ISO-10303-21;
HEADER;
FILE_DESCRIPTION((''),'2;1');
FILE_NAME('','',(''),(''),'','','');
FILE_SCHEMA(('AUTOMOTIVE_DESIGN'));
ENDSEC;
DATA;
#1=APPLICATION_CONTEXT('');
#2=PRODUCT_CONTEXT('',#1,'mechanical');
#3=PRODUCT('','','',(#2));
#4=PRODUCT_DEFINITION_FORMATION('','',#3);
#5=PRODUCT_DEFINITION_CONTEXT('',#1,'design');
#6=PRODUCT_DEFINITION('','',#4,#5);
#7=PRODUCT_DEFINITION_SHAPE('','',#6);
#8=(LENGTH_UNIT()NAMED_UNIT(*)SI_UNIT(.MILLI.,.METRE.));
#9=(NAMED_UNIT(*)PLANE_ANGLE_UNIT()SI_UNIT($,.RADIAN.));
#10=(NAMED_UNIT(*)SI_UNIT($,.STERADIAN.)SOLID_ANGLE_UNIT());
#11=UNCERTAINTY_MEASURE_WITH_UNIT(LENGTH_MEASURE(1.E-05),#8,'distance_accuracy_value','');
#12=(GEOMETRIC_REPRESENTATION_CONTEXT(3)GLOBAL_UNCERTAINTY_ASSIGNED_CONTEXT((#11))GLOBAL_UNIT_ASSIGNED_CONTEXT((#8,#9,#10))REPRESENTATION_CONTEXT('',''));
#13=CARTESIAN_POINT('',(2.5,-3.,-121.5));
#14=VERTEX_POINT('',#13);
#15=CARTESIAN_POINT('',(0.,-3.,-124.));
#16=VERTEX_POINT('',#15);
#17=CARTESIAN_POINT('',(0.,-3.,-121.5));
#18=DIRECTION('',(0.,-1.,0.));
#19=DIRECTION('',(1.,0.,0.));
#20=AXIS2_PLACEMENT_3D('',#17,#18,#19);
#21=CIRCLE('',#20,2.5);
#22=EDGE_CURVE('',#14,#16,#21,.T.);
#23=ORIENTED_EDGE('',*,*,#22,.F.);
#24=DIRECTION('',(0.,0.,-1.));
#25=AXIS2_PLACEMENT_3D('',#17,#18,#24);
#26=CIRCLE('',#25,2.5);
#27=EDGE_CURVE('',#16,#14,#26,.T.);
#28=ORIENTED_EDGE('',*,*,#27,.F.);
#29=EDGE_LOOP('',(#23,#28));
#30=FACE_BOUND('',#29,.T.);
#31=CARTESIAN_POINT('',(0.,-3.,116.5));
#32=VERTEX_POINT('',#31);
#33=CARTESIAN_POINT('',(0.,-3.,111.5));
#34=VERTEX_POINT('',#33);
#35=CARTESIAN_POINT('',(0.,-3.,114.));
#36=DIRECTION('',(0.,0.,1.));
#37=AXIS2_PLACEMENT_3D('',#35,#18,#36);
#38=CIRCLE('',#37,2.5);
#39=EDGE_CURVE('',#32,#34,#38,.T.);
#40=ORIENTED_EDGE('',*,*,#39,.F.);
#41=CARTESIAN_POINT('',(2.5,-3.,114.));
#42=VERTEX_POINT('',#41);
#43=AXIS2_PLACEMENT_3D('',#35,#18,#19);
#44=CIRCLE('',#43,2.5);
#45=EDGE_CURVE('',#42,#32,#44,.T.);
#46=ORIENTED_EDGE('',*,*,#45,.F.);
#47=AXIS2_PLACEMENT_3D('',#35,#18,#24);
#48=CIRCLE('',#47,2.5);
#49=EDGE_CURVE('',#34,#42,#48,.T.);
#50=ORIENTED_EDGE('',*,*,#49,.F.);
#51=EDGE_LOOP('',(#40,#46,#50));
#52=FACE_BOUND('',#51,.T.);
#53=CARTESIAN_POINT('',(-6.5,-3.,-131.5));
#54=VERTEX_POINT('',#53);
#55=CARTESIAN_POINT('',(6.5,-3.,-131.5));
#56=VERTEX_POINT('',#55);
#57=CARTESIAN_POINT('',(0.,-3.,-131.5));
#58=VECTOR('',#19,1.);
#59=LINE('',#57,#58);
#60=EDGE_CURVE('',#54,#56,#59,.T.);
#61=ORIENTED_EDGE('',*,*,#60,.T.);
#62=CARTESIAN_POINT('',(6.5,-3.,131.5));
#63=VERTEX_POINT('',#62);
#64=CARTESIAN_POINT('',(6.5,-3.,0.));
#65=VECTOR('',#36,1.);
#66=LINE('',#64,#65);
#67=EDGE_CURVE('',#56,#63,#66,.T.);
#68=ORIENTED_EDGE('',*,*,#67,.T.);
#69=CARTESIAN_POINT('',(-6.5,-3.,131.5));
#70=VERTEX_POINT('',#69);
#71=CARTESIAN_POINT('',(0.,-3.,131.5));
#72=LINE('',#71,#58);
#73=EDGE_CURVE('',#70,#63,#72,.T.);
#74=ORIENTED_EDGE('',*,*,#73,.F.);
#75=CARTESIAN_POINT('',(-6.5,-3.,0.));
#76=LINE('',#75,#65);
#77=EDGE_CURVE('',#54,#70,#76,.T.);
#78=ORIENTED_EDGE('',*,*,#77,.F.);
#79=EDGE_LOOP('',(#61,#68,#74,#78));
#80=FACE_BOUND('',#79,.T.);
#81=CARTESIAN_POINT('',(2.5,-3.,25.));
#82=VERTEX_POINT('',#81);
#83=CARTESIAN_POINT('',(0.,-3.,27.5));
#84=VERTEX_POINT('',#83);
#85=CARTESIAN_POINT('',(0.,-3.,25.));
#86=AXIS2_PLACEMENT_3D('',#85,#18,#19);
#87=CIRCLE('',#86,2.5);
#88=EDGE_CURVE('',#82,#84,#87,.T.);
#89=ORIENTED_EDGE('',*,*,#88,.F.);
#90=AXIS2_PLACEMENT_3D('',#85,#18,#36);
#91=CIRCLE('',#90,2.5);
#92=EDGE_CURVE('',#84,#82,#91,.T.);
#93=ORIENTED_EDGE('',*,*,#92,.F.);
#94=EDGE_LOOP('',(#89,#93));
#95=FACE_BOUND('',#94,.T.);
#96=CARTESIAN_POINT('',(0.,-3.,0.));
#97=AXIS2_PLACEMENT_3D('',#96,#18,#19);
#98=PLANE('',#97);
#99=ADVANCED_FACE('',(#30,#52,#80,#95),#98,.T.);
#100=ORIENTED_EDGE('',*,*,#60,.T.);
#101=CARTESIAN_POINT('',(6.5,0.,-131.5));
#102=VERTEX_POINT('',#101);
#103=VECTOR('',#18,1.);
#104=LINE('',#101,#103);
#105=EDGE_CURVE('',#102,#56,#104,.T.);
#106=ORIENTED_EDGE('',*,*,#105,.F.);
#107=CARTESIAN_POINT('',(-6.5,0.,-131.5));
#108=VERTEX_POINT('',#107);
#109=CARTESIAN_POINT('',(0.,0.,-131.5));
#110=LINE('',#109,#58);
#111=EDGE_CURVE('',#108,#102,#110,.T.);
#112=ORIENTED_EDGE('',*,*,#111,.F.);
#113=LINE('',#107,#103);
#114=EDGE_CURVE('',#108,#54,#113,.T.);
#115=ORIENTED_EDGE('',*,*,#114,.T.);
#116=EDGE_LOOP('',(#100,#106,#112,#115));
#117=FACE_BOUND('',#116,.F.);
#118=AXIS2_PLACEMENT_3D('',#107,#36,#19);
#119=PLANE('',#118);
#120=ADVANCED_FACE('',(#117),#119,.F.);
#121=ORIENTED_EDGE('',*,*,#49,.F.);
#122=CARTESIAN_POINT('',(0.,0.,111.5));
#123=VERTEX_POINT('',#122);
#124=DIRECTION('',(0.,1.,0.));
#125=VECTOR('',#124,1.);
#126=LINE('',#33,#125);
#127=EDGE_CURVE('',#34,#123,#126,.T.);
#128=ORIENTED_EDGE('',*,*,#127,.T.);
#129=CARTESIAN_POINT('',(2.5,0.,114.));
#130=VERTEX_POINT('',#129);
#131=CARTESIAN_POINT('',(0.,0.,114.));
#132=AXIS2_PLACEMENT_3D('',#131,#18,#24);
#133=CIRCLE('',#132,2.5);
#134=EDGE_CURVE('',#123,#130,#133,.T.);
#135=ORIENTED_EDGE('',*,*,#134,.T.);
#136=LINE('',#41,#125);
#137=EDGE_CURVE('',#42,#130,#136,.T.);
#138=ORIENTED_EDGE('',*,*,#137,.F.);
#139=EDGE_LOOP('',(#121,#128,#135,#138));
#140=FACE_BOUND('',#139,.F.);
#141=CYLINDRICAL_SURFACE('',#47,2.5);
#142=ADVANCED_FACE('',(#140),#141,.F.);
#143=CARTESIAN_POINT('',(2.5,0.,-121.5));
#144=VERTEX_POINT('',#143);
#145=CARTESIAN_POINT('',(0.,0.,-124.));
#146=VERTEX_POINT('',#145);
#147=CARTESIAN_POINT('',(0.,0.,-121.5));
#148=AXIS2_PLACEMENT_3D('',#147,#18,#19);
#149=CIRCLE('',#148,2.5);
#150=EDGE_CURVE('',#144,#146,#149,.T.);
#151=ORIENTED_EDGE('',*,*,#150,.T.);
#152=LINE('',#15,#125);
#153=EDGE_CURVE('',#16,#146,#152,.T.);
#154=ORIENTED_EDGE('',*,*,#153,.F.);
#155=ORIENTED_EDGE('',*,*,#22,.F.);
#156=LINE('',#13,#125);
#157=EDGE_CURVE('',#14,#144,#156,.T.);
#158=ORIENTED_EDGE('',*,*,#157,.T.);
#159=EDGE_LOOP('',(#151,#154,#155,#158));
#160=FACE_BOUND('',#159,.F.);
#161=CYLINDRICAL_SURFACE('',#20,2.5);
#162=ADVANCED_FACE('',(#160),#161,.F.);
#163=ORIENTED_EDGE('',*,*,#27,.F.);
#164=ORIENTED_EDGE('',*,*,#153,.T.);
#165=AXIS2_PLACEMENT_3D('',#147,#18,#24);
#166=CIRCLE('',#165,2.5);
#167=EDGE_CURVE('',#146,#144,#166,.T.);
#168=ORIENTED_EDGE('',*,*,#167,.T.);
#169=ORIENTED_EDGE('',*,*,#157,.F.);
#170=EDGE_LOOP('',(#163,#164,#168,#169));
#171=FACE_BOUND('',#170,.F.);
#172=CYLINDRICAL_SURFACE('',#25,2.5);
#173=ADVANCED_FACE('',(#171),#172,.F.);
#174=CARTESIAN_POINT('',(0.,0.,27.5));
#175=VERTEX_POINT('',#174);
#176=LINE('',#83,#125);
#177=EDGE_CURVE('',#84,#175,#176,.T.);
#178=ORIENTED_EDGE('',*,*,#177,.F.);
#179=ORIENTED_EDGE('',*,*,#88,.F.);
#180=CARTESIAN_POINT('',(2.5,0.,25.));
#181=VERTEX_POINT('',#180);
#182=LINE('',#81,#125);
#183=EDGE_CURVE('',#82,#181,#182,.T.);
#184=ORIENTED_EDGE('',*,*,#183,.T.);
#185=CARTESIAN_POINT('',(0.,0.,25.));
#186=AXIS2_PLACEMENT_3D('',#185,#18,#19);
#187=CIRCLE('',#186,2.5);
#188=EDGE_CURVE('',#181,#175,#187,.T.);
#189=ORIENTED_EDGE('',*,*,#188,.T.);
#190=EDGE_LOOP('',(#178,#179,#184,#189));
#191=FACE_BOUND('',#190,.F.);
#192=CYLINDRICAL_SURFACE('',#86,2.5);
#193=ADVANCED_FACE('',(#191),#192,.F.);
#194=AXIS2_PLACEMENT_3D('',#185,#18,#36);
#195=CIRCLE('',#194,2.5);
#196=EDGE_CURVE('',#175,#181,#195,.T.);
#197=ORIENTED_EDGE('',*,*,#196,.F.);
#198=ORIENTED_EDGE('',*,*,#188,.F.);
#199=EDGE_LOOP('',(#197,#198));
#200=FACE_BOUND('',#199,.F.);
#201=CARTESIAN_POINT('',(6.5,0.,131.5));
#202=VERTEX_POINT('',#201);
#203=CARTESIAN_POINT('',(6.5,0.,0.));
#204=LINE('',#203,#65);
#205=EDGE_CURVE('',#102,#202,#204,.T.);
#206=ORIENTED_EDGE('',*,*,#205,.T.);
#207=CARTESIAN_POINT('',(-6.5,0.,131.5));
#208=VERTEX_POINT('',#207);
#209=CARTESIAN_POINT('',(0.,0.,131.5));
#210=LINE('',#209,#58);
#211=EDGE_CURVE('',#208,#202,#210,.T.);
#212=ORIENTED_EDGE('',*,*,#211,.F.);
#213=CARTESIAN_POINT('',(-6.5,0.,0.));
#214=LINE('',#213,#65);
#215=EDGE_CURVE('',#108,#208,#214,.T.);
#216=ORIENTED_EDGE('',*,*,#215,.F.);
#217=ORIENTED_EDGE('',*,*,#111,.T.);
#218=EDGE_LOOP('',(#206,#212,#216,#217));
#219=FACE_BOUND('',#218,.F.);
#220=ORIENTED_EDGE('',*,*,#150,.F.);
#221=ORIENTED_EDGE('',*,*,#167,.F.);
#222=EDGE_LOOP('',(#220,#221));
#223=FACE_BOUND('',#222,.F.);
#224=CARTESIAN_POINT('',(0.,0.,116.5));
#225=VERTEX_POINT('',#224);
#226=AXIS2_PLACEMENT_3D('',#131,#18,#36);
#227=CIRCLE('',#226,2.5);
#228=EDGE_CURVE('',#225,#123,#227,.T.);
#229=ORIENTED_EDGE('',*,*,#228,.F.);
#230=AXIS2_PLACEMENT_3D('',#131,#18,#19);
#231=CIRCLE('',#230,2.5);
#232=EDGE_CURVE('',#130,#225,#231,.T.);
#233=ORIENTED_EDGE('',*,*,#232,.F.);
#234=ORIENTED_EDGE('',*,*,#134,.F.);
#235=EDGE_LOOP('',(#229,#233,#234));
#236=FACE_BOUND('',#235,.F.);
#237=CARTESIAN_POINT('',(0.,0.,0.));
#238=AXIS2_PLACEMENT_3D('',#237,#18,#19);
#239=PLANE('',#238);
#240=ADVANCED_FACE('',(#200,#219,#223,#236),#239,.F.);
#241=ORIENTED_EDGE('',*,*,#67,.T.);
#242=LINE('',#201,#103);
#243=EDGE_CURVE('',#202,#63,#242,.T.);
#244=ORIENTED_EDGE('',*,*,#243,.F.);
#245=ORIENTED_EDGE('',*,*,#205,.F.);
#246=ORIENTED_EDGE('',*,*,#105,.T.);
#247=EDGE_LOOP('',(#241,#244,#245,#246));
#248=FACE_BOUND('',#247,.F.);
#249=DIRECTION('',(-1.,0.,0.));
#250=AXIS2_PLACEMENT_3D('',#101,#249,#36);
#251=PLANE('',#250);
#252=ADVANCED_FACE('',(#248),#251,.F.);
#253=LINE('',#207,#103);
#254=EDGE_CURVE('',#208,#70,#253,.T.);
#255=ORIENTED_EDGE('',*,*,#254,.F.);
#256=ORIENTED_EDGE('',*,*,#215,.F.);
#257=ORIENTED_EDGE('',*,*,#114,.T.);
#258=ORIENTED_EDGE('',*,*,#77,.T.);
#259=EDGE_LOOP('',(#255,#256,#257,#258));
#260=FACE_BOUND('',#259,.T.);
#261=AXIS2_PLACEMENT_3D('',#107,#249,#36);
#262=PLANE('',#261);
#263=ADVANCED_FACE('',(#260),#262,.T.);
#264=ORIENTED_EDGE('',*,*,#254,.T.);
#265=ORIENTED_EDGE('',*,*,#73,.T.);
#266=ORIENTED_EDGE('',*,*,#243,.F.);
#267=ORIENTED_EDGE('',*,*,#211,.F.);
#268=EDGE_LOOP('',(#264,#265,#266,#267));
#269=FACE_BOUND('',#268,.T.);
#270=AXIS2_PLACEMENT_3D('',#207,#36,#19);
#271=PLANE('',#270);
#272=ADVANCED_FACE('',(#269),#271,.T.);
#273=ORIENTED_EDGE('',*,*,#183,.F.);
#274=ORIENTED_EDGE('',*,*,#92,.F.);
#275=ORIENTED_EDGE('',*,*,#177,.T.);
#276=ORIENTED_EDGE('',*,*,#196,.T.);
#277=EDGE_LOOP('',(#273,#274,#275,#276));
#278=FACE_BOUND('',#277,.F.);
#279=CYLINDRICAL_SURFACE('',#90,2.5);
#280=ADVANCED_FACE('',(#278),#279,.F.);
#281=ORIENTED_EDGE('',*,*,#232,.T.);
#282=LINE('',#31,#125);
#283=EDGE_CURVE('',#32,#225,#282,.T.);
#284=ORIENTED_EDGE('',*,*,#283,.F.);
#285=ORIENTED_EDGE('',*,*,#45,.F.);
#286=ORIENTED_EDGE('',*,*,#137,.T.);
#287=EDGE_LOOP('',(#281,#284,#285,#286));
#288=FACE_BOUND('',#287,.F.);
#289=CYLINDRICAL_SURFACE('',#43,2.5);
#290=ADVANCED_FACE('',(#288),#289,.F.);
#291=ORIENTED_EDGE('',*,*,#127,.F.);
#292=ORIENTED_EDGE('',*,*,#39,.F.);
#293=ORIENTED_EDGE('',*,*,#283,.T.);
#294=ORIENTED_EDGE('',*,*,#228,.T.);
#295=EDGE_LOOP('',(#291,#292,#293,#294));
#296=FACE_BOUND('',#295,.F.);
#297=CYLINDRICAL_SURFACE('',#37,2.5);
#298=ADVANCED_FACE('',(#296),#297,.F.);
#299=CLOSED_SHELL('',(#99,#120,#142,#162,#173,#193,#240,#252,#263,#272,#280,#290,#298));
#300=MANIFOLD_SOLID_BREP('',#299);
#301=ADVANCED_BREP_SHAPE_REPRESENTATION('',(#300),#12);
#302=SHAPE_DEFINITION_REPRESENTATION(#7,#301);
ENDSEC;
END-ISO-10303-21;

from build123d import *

# Parameters (mm, degrees)
F0_W     = 13
F0_H     = 263
F1_DEPTH = 3
F3_DEPTH = 25


with BuildPart() as f1:
    # F0 (on Front) → F1 (new body)
    with BuildSketch(Plane.XZ):
        Rectangle(F0_W, F0_H)
    extrude(amount=F1_DEPTH)

    # F2 (on face) → F3 (cut)
    with BuildSketch(Plane.XZ.offset(3)):
        with BuildLine():
            ThreePointArc((2.5, 25), (1.767766953, 26.767766953), (0, 27.5))
            ThreePointArc((0, 27.5), (-1.767766953, 23.232233047), (2.5, 25))
        make_face()
        with BuildLine():
            ThreePointArc((2.5, 114), (1.767766953, 115.767766953), (0, 116.5))
            Line((0, 116.5), (0, 114))
            Line((0, 114), (0, 111.5))
            ThreePointArc((0, 111.5), (1.767766953, 112.232233047), (2.5, 114))
        make_face()
        with BuildLine():
            Line((0, 114), (0, 116.5))
            ThreePointArc((0, 116.5), (-2.5, 114), (0, 111.5))
            Line((0, 111.5), (0, 114))
        make_face()
        with BuildLine():
            ThreePointArc((2.5, -121.5), (-1.767766953, -119.732233047), (0, -124))
            ThreePointArc((0, -124), (1.767766953, -123.267766953), (2.5, -121.5))
        make_face()
    extrude(amount=-F3_DEPTH, mode=Mode.SUBTRACT)


solid = f1.part
